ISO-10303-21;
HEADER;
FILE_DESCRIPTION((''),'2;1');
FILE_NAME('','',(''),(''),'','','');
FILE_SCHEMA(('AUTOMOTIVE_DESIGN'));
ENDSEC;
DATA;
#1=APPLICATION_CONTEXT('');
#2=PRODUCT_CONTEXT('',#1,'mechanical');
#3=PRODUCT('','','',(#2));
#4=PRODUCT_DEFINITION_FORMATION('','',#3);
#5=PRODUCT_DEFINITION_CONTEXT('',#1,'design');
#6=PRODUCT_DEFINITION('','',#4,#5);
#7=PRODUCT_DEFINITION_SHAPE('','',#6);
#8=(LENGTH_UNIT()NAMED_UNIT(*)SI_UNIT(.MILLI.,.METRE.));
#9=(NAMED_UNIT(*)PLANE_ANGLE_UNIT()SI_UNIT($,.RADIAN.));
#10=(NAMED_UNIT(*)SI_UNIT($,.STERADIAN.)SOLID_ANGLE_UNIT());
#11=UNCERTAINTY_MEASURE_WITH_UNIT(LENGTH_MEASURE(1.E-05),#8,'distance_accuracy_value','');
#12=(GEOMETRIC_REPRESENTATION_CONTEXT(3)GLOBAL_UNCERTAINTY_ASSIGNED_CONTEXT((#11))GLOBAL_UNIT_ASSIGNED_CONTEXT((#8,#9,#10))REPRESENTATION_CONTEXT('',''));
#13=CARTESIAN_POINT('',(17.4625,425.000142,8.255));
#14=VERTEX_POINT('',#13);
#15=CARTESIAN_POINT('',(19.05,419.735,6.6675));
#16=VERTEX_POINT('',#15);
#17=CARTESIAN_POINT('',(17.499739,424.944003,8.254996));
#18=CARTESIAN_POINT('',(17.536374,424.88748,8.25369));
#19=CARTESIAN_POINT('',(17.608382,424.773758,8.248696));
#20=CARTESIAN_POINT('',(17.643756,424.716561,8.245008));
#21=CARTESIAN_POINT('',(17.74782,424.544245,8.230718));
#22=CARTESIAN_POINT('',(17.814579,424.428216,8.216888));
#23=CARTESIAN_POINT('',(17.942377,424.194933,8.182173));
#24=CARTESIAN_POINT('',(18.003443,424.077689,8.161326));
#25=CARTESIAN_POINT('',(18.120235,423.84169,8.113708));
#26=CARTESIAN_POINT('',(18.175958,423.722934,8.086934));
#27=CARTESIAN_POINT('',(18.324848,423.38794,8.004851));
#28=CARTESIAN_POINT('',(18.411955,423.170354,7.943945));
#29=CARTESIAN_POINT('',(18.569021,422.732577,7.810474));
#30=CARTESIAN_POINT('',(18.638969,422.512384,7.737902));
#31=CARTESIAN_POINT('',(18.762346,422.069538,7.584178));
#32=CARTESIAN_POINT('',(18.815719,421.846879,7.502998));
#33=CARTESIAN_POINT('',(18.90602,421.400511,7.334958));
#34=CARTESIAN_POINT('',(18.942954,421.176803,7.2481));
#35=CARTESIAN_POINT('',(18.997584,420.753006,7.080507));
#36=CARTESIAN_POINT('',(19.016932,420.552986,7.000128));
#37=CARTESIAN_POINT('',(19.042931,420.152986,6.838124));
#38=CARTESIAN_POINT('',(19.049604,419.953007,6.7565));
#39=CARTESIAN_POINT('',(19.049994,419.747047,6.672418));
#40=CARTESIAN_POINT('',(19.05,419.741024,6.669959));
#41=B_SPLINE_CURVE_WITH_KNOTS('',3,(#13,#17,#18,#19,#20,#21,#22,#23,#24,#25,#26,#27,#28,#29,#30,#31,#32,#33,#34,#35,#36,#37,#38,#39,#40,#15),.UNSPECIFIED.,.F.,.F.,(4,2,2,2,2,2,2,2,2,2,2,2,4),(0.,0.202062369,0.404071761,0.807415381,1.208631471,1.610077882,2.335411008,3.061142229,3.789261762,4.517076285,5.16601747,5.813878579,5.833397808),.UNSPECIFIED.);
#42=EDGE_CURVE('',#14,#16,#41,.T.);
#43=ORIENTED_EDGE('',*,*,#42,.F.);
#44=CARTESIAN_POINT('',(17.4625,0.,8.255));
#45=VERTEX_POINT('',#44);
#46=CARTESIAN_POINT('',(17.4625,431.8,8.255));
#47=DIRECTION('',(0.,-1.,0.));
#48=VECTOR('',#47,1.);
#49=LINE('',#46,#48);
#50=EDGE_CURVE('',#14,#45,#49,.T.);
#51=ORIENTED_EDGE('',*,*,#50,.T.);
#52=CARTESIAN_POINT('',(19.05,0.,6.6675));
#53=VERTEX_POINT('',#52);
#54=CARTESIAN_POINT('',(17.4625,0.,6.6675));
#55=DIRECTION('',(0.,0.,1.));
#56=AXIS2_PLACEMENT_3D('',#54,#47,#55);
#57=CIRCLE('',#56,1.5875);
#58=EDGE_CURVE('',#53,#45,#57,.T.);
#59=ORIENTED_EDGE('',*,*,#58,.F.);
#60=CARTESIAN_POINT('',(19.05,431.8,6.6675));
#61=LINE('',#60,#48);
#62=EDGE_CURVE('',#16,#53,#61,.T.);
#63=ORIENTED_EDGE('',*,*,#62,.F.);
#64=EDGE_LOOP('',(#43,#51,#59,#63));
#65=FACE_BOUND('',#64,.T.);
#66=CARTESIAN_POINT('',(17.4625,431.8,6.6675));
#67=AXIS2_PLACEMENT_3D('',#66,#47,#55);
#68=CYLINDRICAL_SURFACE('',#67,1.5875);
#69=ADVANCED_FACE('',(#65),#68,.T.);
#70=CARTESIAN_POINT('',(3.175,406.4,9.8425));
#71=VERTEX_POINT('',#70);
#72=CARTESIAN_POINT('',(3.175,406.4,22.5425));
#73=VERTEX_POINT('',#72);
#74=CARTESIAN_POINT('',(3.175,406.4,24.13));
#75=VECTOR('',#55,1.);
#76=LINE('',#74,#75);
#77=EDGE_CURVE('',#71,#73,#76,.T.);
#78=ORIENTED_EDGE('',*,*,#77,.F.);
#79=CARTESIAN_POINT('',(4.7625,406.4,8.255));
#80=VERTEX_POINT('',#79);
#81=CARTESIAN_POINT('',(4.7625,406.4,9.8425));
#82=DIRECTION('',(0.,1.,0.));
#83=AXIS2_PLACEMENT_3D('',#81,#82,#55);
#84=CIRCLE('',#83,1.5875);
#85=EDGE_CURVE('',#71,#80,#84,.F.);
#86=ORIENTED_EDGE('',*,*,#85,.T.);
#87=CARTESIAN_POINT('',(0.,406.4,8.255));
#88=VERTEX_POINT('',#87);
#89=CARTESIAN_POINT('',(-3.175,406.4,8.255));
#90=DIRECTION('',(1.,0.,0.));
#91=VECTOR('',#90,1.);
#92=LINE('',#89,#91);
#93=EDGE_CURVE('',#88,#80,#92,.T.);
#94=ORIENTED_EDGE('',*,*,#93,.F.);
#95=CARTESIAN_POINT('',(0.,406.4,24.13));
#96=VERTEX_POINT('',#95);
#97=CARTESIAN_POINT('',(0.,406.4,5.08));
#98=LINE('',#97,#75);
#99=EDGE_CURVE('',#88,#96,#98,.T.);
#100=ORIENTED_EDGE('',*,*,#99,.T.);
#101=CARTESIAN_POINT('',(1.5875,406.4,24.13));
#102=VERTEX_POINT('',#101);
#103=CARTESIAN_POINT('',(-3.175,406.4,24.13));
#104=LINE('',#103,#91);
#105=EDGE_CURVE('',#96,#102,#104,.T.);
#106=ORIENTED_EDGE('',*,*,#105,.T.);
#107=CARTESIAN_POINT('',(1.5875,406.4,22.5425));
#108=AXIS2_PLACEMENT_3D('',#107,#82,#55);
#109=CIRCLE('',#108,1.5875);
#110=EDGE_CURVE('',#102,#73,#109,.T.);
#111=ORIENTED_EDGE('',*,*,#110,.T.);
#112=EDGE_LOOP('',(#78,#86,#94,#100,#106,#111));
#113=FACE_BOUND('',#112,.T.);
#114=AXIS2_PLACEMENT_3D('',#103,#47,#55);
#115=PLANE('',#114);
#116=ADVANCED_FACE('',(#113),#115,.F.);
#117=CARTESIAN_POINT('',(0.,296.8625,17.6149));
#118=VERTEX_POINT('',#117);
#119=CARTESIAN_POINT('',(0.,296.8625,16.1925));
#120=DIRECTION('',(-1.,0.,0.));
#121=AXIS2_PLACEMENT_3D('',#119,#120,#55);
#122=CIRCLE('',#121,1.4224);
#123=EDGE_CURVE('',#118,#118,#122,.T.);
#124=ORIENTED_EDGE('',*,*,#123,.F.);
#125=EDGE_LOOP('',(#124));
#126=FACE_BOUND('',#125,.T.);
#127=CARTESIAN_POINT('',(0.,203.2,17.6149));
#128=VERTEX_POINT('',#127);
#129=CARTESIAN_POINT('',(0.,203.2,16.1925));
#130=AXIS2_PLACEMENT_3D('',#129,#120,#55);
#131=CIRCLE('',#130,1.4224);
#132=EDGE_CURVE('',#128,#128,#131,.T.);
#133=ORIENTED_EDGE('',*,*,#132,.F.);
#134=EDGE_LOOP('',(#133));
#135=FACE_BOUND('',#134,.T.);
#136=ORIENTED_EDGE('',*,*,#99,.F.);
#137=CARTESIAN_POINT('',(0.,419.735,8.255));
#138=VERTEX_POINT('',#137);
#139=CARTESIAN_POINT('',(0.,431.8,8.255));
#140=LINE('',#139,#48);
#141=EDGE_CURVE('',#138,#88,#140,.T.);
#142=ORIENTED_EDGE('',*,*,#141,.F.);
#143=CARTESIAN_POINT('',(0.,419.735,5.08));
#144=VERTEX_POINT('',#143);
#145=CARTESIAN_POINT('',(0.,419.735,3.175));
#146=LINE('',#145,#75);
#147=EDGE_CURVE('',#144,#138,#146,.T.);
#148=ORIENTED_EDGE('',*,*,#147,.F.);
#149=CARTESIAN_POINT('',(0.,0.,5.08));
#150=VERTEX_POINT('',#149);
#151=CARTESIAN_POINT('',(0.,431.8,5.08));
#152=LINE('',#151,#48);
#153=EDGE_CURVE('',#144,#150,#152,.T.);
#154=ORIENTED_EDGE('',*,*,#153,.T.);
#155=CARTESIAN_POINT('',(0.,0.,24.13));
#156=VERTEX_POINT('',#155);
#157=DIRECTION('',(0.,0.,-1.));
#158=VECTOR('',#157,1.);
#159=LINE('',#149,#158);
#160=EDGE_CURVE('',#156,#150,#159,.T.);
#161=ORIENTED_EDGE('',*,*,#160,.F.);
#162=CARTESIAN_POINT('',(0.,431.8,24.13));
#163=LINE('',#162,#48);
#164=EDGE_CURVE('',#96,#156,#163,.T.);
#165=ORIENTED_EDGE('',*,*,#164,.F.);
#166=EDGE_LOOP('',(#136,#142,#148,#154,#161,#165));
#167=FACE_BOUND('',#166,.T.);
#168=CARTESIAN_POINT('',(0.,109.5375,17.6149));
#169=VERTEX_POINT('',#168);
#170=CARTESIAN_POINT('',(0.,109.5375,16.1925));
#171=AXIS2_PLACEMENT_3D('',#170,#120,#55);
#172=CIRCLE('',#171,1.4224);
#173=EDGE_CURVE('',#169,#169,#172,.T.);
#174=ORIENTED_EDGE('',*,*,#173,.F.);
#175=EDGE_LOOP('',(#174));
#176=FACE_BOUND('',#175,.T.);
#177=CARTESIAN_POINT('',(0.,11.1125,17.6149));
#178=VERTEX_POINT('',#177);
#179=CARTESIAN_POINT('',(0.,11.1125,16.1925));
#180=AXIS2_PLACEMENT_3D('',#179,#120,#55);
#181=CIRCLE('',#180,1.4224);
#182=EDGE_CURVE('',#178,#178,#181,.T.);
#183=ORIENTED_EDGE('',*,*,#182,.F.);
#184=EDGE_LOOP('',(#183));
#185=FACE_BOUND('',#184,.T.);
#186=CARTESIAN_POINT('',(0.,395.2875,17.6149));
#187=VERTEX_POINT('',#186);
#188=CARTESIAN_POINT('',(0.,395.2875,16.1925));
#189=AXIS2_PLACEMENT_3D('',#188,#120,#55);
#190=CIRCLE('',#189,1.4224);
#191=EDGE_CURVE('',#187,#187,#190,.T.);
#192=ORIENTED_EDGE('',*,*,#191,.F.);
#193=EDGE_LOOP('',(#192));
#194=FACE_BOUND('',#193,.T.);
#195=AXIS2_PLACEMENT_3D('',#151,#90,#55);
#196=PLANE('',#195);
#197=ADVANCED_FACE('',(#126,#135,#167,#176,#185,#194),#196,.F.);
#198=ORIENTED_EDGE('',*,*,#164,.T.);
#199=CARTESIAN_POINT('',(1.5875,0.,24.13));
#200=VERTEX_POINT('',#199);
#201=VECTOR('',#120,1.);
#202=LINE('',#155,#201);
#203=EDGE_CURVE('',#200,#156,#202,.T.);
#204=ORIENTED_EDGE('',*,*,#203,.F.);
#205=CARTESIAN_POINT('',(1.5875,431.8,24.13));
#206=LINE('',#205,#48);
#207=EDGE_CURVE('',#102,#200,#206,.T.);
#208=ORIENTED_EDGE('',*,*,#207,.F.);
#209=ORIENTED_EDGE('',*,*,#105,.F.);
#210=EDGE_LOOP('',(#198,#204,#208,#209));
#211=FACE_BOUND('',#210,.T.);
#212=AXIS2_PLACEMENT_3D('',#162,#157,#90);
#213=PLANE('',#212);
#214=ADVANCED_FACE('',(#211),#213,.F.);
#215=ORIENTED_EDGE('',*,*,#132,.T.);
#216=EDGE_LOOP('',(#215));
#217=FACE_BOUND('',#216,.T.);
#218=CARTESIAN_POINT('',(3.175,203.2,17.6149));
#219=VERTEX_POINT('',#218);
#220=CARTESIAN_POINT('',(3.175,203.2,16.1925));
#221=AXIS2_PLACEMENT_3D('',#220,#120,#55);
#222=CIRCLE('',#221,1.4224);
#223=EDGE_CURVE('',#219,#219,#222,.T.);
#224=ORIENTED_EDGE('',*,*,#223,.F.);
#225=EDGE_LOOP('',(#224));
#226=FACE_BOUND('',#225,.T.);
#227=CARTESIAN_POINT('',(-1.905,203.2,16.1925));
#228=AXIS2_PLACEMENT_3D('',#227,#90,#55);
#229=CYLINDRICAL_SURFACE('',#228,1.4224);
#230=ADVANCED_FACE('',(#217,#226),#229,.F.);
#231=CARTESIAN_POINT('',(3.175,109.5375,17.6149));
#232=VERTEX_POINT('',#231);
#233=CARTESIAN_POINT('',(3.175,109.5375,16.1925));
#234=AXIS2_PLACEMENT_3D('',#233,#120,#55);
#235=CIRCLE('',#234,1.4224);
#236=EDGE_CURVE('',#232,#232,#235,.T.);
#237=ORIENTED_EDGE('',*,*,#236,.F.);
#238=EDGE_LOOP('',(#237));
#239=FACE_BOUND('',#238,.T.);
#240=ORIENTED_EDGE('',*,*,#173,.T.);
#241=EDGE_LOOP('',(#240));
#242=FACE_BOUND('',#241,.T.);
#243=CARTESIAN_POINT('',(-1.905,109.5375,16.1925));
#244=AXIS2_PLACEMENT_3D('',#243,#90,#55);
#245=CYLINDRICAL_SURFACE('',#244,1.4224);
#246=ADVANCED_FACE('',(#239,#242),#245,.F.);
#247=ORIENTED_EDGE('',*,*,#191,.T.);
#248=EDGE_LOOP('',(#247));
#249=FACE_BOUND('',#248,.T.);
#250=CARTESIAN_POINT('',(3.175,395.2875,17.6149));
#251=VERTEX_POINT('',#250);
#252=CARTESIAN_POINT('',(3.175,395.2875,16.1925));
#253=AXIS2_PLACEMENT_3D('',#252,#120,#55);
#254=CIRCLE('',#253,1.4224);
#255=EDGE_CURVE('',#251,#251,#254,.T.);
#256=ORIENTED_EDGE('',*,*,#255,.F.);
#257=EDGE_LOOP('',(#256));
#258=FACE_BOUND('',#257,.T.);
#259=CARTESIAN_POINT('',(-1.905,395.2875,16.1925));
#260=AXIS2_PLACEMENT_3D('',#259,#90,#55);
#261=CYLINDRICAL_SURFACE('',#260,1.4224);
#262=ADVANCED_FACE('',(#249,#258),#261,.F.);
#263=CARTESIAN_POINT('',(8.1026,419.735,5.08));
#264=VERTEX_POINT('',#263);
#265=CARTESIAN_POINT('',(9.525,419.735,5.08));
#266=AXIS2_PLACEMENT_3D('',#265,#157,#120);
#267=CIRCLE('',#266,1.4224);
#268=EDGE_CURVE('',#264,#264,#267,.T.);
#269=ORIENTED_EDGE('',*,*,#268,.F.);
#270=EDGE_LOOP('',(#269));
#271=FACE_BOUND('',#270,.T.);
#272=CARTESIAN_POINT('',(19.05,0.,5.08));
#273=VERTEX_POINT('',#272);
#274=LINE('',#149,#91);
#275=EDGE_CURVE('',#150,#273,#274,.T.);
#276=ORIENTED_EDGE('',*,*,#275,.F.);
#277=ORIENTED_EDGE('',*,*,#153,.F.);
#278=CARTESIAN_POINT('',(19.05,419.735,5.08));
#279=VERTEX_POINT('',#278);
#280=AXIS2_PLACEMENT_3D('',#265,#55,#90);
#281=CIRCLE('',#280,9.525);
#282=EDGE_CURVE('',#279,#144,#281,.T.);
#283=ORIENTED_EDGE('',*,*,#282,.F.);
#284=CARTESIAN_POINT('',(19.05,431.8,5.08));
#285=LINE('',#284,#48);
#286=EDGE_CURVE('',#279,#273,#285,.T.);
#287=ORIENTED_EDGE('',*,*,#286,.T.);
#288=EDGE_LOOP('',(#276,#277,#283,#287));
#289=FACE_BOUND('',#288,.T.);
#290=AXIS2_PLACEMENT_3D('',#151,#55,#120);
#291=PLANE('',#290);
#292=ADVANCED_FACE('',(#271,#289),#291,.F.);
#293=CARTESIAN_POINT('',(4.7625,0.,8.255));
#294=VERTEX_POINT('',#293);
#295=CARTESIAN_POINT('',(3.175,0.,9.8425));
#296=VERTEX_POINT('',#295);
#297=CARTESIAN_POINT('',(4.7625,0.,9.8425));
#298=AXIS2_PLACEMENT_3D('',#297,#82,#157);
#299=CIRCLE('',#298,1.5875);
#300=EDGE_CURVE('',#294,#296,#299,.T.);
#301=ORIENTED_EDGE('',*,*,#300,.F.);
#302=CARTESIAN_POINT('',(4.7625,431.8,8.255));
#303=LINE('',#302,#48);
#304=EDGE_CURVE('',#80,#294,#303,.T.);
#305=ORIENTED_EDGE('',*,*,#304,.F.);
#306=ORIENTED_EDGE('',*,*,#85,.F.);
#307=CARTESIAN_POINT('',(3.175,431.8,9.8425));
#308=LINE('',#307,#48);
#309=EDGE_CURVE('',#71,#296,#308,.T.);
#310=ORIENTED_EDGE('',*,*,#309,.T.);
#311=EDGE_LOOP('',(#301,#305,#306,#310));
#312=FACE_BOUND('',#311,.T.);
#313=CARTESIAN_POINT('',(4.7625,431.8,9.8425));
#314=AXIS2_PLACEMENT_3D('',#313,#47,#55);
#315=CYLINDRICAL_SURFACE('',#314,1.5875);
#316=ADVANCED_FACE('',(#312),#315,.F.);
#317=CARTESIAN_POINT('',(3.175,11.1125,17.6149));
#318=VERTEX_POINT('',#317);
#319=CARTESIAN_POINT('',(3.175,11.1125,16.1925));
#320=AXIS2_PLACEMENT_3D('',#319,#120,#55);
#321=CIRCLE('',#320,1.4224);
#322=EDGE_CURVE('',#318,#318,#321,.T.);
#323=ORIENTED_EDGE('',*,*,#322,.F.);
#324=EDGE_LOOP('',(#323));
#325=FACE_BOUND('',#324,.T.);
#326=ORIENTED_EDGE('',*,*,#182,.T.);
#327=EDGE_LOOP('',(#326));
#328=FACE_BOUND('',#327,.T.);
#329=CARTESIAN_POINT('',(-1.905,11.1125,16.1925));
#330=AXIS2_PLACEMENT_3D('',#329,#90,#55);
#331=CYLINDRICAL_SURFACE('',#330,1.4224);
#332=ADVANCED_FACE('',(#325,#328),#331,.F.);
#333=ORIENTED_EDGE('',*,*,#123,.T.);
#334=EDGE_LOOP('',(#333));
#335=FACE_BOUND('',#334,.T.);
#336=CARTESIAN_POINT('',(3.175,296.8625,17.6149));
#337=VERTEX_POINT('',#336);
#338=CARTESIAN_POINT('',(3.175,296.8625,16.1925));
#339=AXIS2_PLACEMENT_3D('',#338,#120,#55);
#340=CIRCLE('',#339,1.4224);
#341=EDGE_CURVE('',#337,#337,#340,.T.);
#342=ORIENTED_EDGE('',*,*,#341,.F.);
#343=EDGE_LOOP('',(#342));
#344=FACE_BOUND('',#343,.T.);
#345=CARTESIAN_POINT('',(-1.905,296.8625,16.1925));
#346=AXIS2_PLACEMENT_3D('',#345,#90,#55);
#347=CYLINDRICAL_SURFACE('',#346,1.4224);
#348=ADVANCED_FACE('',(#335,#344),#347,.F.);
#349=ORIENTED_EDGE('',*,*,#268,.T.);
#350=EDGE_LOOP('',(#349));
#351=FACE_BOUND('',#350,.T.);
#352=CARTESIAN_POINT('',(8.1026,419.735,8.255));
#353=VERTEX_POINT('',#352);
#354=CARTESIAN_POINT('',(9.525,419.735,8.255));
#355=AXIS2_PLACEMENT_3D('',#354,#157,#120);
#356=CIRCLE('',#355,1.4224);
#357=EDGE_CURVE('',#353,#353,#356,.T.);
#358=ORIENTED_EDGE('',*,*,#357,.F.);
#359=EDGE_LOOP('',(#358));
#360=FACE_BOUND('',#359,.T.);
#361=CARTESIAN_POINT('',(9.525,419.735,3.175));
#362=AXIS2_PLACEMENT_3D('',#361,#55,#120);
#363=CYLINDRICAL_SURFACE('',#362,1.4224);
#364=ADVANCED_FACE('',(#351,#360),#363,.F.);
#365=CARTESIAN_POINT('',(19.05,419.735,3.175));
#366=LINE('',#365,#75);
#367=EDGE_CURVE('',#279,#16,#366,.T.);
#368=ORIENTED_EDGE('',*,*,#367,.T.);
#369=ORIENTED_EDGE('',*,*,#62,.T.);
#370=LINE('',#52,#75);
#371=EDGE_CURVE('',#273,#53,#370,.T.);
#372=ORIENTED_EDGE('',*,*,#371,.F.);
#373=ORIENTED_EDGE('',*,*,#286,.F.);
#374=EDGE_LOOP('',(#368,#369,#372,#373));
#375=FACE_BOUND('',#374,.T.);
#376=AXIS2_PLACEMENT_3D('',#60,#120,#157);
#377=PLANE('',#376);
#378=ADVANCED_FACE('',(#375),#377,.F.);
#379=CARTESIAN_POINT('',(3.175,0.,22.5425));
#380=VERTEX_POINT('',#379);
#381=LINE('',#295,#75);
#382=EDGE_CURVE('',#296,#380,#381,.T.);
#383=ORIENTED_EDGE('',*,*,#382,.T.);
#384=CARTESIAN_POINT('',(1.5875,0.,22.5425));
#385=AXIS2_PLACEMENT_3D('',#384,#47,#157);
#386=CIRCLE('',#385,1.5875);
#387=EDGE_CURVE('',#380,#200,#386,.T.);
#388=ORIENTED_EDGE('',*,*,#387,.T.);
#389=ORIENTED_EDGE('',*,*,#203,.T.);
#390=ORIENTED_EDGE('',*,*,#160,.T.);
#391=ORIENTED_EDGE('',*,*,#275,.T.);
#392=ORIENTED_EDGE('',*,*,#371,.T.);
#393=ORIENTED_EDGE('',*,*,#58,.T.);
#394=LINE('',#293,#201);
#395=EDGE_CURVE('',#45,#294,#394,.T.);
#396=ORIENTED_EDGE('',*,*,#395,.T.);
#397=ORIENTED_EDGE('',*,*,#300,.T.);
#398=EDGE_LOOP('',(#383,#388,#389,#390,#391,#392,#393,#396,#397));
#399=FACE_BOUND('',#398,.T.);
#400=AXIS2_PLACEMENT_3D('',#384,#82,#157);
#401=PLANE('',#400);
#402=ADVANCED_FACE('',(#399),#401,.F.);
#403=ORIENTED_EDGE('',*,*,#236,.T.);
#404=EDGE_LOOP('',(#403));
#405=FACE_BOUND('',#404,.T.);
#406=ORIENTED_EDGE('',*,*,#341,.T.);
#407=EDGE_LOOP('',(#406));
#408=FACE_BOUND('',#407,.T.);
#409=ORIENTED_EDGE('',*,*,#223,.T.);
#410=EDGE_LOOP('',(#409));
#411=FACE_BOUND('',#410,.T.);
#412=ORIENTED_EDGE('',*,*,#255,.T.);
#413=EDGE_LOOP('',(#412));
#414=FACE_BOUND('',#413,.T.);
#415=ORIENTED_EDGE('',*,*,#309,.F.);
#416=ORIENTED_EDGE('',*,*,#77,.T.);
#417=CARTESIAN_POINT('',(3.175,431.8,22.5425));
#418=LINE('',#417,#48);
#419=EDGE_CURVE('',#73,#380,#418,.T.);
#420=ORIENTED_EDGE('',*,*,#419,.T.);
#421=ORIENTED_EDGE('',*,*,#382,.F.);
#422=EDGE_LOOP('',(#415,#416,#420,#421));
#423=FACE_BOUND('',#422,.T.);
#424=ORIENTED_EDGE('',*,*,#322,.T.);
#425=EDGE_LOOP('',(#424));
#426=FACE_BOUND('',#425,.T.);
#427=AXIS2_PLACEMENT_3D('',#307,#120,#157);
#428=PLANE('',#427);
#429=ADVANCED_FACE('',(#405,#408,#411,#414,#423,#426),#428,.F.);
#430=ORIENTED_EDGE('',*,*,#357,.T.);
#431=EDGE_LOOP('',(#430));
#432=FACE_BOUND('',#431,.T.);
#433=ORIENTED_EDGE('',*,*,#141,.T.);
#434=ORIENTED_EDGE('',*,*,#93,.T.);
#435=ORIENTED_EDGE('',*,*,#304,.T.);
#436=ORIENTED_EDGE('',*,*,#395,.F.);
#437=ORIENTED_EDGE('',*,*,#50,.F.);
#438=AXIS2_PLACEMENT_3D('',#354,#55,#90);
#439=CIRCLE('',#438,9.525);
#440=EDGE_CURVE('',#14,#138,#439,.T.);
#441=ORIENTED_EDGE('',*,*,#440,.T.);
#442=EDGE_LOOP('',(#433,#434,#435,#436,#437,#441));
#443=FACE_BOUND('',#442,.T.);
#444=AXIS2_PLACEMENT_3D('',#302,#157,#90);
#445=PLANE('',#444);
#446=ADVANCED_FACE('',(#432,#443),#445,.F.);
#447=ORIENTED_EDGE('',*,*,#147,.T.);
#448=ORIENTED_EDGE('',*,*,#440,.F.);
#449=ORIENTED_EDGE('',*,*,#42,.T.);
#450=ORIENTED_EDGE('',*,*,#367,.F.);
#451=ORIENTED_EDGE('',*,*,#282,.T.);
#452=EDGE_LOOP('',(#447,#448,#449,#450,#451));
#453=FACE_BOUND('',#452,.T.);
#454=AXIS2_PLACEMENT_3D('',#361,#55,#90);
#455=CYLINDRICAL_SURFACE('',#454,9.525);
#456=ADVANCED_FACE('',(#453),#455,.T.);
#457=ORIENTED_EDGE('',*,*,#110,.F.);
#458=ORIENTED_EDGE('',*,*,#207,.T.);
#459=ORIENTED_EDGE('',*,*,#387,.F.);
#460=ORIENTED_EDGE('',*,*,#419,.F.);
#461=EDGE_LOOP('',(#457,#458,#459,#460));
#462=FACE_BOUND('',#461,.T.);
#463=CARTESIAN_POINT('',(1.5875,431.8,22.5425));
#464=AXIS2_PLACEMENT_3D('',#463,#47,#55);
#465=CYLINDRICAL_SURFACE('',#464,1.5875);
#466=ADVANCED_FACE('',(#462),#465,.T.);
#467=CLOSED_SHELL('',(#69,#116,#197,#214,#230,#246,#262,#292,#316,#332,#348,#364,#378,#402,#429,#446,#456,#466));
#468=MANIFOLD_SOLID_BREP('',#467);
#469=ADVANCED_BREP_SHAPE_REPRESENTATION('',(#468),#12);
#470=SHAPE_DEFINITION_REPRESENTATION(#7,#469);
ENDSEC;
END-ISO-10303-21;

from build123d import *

# Parameters (mm, degrees)
BOSS_EXTRUDE1_DEPTH = 431.8
SKETCH4_W           = 15.875
SKETCH4_H           = 25.4
CUT_EXTRUDE1_DEPTH  = 6.35
SKETCH5_W           = 1.5875
SKETCH5_H           = 25.4
CUT_EXTRUDE2_DEPTH  = 6.35
SKETCH6_R           = 1.4224
CUT_EXTRUDE3_DEPTH  = 5.08
CUT_EXTRUDE4_START  = -2.54
CUT_EXTRUDE4_DEPTH  = 2.54
SKETCH8_R           = 1.4224
CUT_EXTRUDE5_DEPTH  = 5.08
SKETCH9_W           = 28.861002292
SKETCH9_H           = 547.524656259
CUT_EXTRUDE6_DEPTH  = 30.48
CUT_EXTRUDE7_DEPTH  = 5.08


with BuildPart() as part:
    # Sketch2 → Boss-Extrude1 (new body)
    with BuildSketch(Plane(origin=(0, 0, 0), x_dir=(1, 0, 0), z_dir=(0, 1, 0))):
        with BuildLine():
            Line((0, 0), (19.05, 0))
            Line((19.05, 0), (19.05, 1.5875))
            ThreePointArc((19.05, 1.5875), (18.585032015, 2.710032015), (17.4625, 3.175))
            Line((17.4625, 3.175), (4.7625, 3.175))
            ThreePointArc((4.7625, 3.175), (3.639967985, 3.639967985), (3.175, 4.7625))
            Line((3.175, 4.7625), (3.175, 17.4625))
            ThreePointArc((3.175, 17.4625), (2.710032015, 18.585032015), (1.5875, 19.05))
            Line((1.5875, 19.05), (0, 19.05))
            Line((0, 19.05), (0, 0))
        make_face()
    extrude(amount=BOSS_EXTRUDE1_DEPTH)

    # Sketch4 → Cut-Extrude1 (cut)
    with BuildSketch(Plane(origin=(3.175, 0, 0), x_dir=(0, 0, -1), z_dir=(1, 0, 0))):
        with Locations((11.1125, 419.1)):
            Rectangle(SKETCH4_W, SKETCH4_H)
    extrude(amount=-CUT_EXTRUDE1_DEPTH, mode=Mode.SUBTRACT)

    # Sketch5 → Cut-Extrude2 (cut)
    with BuildSketch(Plane.ZY.offset(-3.175)):
        with Locations((-3.96875, 419.1)):
            Rectangle(SKETCH5_W, SKETCH5_H)
    extrude(amount=-CUT_EXTRUDE2_DEPTH, mode=Mode.SUBTRACT)

    # Sketch6 → Cut-Extrude3 (cut)
    with BuildSketch(Plane(origin=(3.175, 0, 0), x_dir=(0, 0, -1), z_dir=(1, 0, 0))):
        with Locations((11.1125, 109.5375)):
            Circle(SKETCH6_R)
        with Locations((11.1125, 203.2)):
            Circle(SKETCH6_R)
        with Locations((11.1125, 296.8625)):
            Circle(SKETCH6_R)
        with Locations((11.1125, 11.1125)):
            Circle(SKETCH6_R)
        with Locations((11.1125, 395.2875)):
            Circle(SKETCH6_R)
    extrude(amount=-CUT_EXTRUDE3_DEPTH, mode=Mode.SUBTRACT)

    # Sketch7 → Cut-Extrude4 (cut)
    with BuildSketch(Plane(origin=(0, 431.8, 0), x_dir=(1, 0, 0), z_dir=(0, 1, 0)).offset(CUT_EXTRUDE4_START)):
        with BuildLine():
            Line((17.4625, 3.175), (0, 3.175))
            Line((0, 3.175), (0, 0))
            Line((0, 0), (19.05, 0))
            Line((19.05, 0), (19.05, 1.5875))
            ThreePointArc((19.05, 1.5875), (18.585032015, 2.710032015), (17.4625, 3.175))
        make_face()
    extrude(amount=CUT_EXTRUDE4_DEPTH, mode=Mode.SUBTRACT)

    # Sketch8 → Cut-Extrude5 (cut)
    with BuildSketch(Plane(origin=(0, 0, -3.175), x_dir=(-1, 0, 0), z_dir=(0, 0, -1))):
        with Locations((-9.525, 419.735)):
            Circle(SKETCH8_R)
    extrude(amount=-CUT_EXTRUDE5_DEPTH, mode=Mode.SUBTRACT)


with BuildPart() as body_2:
    # Mirror3: mirrored copy
    add(part.part.mirror(Plane.XY.offset(2.54)))

    # Sketch10 → Cut-Extrude7 (cut)
    with BuildSketch(Plane.XY.offset(8.255)):
        with BuildLine():
            Line((19.05, 419.735), (19.05, 429.26))
            Line((19.05, 429.26), (9.525, 429.26))
            ThreePointArc((9.525, 429.26), (16.260192091, 426.470192091), (19.05, 419.735))
        make_face()
        with BuildLine():
            ThreePointArc((0, 419.735), (2.789807909, 426.470192091), (9.525, 429.26))
            Line((9.525, 429.26), (0, 429.26))
            Line((0, 429.26), (0, 419.735))
        make_face()
    extrude(amount=-CUT_EXTRUDE7_DEPTH, mode=Mode.SUBTRACT)


with BuildPart() as part_1:
    add(part.part)

    # Sketch9 → Cut-Extrude6 (cut)
    with BuildSketch(Plane.XY.offset(2.54)):
        with Locations((7.805746781, 195.778589833)):
            Rectangle(SKETCH9_W, SKETCH9_H)
    extrude(amount=-CUT_EXTRUDE6_DEPTH, mode=Mode.SUBTRACT)


solid = body_2.part
